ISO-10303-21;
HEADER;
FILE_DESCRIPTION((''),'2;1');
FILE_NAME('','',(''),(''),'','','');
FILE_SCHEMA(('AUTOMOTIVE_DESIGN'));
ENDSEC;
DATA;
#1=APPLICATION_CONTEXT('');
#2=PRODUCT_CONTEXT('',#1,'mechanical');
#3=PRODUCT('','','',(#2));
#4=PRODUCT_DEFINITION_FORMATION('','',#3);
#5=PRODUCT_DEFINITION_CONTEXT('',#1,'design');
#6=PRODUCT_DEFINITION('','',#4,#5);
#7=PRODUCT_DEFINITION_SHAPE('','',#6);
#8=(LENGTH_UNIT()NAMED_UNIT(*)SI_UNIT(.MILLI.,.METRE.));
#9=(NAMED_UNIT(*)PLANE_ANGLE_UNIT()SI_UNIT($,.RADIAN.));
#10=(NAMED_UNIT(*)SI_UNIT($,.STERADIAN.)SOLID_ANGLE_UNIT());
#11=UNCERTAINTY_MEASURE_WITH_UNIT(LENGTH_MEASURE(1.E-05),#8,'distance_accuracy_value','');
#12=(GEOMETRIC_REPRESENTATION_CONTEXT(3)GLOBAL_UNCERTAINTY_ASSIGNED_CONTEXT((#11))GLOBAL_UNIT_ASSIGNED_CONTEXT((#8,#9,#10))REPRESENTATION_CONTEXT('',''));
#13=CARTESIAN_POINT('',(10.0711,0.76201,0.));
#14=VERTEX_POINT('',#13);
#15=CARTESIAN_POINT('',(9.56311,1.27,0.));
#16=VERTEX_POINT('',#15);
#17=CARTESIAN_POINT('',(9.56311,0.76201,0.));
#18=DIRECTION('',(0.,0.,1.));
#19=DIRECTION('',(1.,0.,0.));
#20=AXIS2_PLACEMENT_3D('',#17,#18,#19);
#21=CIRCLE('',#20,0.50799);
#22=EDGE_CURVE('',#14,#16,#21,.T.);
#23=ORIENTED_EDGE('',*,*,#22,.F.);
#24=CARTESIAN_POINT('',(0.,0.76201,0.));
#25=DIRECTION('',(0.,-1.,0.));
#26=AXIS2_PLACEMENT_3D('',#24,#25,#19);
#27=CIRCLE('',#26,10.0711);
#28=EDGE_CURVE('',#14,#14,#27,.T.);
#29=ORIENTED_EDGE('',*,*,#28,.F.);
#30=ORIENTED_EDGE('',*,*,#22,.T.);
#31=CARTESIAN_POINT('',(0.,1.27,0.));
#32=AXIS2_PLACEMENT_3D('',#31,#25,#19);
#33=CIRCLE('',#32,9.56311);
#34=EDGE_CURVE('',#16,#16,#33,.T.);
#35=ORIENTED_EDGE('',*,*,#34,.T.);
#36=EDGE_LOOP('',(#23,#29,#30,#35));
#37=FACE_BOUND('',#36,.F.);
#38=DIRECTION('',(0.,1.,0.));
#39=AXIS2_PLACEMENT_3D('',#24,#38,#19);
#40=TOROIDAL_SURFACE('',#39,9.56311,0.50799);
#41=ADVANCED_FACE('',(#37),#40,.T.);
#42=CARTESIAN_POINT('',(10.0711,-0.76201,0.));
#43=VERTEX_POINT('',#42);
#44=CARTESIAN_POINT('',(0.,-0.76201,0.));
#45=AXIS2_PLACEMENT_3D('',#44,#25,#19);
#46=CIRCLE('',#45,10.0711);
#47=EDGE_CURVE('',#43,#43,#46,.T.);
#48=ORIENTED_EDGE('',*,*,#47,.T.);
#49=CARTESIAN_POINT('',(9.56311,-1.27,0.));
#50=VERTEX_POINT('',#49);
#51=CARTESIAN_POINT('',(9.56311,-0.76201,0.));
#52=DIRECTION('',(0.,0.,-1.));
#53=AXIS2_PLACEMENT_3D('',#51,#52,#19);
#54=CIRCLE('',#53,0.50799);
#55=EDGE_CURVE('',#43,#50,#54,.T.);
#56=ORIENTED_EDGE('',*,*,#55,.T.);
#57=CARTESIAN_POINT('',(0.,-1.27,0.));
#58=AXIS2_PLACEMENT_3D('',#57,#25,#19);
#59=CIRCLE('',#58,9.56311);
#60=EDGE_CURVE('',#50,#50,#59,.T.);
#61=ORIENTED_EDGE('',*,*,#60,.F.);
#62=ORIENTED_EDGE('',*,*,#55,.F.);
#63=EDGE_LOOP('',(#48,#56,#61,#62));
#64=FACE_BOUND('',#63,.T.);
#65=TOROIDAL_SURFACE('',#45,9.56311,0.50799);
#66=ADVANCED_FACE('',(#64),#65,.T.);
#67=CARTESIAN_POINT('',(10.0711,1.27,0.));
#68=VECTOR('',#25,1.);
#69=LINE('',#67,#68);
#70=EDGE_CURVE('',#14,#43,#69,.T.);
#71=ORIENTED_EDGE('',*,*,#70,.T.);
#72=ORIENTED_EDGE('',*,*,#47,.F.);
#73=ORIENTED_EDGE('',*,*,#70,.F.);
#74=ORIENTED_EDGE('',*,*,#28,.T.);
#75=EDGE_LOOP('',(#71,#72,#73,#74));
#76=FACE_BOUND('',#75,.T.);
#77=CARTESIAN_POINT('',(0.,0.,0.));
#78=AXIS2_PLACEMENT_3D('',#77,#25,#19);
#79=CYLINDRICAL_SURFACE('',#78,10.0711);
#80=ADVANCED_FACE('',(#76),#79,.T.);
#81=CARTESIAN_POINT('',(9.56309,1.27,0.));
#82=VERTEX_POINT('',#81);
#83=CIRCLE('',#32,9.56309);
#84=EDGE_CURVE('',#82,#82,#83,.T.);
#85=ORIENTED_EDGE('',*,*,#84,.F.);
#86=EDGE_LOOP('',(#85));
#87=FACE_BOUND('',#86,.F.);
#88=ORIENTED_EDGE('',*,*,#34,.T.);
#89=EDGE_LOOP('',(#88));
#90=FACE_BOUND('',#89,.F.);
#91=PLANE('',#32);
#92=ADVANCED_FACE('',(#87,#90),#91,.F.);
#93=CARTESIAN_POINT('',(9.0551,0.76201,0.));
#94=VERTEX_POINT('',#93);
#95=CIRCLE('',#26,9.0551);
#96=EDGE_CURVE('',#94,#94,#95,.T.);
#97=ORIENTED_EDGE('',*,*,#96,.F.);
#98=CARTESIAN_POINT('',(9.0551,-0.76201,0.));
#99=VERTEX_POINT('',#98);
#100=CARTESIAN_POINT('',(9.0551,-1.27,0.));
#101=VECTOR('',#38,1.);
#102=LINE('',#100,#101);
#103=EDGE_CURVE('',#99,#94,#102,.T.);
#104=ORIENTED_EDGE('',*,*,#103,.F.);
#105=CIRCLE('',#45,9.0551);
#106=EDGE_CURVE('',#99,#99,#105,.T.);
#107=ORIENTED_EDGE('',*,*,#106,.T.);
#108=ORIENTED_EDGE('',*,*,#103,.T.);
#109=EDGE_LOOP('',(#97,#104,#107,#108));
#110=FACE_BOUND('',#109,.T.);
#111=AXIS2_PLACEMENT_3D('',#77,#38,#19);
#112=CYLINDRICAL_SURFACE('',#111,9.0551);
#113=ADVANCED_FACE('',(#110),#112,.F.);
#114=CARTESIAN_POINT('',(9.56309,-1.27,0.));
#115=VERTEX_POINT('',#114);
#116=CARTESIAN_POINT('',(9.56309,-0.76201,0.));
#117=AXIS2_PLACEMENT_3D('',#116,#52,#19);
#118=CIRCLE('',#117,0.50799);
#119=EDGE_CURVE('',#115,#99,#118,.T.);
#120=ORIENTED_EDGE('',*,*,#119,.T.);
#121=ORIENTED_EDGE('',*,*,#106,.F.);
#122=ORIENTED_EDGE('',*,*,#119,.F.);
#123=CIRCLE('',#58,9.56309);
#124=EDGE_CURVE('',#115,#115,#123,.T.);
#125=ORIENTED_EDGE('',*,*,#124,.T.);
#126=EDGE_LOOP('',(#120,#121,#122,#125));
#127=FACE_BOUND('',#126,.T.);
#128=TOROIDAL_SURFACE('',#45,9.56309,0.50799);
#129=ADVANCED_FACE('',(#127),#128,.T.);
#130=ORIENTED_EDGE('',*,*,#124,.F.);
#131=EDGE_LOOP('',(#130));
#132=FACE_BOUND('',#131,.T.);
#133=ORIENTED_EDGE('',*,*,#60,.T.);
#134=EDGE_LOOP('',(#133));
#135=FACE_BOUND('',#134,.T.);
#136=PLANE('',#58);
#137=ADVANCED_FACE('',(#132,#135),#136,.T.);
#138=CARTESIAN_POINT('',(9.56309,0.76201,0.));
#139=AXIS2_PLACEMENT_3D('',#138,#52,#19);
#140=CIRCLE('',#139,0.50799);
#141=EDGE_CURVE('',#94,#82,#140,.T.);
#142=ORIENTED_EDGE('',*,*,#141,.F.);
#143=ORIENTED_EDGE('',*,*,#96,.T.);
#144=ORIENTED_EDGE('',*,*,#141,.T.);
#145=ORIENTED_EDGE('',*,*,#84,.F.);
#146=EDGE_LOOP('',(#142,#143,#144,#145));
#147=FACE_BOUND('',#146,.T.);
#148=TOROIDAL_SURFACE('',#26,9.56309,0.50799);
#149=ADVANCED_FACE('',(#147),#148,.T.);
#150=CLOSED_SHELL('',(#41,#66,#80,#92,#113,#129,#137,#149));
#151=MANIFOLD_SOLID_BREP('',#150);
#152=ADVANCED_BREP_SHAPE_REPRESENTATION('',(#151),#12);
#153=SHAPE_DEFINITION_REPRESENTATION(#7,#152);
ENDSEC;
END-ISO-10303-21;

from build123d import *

# Parameters (mm, degrees)
F0_R     = 10.0711
F0_R_2   = 9.0551
F1_DEPTH = 1.27
F2_R     = 0.50799


# Not quite as in the source:
# - a fillet or chamfer is up to 0.001 mm smaller than in the source, because OpenCascade refuses the exact size


with BuildPart() as f1:
    # F0 (on Front) → F1 (new body, symmetric)
    with BuildSketch(Plane.XZ):
        Circle(F0_R)
        Circle(F0_R_2, mode=Mode.SUBTRACT)
    extrude(amount=F1_DEPTH, both=True)

    # F2 (radius 0.508 in the source; OpenCascade refuses exactly that, so slightly less here)
    f2_edges = [f1.edges().sort_by_distance(p)[0] for p in [
        (-9.0551, -1.27, 0),
        (-9.0551, 1.27, 0),
        (-10.0711, -1.27, 0),
        (-10.0711, 1.27, 0),
        (10.0711, 0, 0),
    ]]
    fillet(f2_edges, radius=F2_R)


solid = f1.part
